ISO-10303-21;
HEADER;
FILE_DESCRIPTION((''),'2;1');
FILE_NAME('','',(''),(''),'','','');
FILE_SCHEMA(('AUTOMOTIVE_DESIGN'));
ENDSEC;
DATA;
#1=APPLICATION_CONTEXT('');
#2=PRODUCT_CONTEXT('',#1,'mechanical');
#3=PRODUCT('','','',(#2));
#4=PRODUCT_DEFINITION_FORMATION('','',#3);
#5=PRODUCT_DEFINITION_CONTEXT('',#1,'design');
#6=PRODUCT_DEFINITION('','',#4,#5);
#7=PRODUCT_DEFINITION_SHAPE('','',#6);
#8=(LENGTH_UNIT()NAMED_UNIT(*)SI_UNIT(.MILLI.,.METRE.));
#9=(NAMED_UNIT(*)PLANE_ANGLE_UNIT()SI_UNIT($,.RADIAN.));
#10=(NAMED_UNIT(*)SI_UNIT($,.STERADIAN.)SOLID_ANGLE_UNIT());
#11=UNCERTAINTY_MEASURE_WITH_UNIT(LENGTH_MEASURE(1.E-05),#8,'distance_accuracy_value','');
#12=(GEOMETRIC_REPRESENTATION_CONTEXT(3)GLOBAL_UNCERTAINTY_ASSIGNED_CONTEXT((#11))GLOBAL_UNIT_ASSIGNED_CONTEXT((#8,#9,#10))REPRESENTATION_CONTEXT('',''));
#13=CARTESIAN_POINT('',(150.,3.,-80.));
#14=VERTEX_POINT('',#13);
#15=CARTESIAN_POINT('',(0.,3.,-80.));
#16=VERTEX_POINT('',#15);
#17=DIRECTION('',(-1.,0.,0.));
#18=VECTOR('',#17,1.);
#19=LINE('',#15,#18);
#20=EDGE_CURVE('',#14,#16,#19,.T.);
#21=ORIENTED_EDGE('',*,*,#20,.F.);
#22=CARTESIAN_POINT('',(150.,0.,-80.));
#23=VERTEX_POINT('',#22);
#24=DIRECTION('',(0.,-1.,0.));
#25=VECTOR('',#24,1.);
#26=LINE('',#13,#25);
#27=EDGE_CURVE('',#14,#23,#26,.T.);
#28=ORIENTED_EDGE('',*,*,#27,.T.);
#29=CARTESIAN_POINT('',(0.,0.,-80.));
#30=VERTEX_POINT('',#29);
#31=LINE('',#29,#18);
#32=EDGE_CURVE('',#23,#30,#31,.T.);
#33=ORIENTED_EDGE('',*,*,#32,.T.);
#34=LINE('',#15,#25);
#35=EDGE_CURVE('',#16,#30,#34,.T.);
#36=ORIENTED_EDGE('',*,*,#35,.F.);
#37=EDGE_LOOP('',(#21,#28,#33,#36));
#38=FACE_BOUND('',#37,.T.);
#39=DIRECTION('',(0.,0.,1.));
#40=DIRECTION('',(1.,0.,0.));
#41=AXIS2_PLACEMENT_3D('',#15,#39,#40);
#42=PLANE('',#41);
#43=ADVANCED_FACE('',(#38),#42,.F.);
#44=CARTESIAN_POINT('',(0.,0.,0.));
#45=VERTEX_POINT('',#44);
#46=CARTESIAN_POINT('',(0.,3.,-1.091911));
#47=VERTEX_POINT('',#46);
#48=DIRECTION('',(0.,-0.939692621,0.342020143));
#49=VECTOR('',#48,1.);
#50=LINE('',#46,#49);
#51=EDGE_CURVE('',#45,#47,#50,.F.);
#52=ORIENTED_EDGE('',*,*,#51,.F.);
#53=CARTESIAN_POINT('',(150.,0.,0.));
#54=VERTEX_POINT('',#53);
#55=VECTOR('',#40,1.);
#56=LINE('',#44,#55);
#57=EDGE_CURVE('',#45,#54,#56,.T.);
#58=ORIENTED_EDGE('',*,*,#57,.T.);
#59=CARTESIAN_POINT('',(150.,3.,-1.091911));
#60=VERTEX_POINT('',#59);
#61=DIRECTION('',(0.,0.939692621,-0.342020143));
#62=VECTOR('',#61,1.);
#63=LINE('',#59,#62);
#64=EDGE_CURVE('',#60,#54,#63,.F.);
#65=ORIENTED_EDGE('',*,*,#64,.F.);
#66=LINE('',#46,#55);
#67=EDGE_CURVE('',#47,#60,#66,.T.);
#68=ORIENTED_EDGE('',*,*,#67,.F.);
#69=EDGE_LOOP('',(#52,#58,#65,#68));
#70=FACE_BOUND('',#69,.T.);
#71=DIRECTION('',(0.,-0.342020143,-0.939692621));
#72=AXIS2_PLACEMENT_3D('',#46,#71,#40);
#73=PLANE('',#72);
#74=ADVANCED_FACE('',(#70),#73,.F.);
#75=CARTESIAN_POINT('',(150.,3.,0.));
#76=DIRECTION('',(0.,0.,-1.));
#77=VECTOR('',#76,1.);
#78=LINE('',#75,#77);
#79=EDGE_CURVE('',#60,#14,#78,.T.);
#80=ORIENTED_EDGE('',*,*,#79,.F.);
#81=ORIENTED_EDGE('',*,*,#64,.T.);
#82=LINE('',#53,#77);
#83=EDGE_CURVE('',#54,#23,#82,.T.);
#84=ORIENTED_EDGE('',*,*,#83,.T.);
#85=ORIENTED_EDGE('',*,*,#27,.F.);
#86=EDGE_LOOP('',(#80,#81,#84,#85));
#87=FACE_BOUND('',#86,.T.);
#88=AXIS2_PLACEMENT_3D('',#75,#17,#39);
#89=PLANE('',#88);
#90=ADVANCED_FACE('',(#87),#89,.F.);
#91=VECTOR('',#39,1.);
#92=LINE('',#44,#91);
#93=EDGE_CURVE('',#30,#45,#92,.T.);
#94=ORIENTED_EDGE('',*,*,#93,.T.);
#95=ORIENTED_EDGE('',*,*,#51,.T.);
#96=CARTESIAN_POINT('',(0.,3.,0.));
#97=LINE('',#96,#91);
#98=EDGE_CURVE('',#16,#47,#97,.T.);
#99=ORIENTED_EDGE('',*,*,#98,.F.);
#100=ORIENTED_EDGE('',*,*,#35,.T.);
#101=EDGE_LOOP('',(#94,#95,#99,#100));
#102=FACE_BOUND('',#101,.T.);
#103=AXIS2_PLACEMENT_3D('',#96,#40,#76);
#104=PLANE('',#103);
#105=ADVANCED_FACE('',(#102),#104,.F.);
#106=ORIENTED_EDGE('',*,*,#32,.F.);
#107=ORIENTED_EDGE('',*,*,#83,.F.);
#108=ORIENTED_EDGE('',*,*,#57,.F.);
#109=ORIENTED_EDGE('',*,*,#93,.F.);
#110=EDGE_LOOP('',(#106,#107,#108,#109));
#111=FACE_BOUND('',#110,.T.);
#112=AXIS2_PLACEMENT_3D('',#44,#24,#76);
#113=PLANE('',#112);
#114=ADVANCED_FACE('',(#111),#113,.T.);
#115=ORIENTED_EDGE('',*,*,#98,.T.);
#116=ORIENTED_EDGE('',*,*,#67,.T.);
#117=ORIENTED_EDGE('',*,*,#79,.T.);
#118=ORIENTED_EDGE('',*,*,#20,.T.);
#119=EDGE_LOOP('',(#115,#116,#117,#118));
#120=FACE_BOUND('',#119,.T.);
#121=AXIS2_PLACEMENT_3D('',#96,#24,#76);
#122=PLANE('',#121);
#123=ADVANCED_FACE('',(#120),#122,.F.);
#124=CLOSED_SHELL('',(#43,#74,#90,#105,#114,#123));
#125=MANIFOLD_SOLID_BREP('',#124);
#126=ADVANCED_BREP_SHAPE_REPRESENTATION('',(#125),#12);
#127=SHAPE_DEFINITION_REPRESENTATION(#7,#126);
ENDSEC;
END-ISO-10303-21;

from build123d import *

# Parameters (mm, degrees)
ESQUISSE1_W        = 150
ESQUISSE1_H        = 80
BOSS_EXTRU_1_DEPTH = 3
CHANFREIN2_SIZE2   = 1.091910703
CHANFREIN2_SIZE    = 3


with BuildPart() as part:
    # Esquisse1 → Boss.-Extru.1 (new body)
    with BuildSketch(Plane(origin=(0, 0, 0), x_dir=(1, 0, 0), z_dir=(0, 1, 0))):
        with Locations((75, 40)):
            Rectangle(ESQUISSE1_W, ESQUISSE1_H)
    extrude(amount=BOSS_EXTRU_1_DEPTH)

    # Chanfrein2
    chanfrein2_edges = [part.edges().sort_by_distance(p)[0] for p in [
        (75, 3, 0),
    ]]
    chanfrein2_side = [part.faces().sort_by_distance(p)[0] for p in [
        (75, 2.978161786, 0),
    ]]
    chamfer(chanfrein2_edges, length=CHANFREIN2_SIZE - 0.0001, length2=CHANFREIN2_SIZE2 - 0.0001, reference=chanfrein2_side[0])  # a hair under: the kernel refuses the full size


solid = part.part
